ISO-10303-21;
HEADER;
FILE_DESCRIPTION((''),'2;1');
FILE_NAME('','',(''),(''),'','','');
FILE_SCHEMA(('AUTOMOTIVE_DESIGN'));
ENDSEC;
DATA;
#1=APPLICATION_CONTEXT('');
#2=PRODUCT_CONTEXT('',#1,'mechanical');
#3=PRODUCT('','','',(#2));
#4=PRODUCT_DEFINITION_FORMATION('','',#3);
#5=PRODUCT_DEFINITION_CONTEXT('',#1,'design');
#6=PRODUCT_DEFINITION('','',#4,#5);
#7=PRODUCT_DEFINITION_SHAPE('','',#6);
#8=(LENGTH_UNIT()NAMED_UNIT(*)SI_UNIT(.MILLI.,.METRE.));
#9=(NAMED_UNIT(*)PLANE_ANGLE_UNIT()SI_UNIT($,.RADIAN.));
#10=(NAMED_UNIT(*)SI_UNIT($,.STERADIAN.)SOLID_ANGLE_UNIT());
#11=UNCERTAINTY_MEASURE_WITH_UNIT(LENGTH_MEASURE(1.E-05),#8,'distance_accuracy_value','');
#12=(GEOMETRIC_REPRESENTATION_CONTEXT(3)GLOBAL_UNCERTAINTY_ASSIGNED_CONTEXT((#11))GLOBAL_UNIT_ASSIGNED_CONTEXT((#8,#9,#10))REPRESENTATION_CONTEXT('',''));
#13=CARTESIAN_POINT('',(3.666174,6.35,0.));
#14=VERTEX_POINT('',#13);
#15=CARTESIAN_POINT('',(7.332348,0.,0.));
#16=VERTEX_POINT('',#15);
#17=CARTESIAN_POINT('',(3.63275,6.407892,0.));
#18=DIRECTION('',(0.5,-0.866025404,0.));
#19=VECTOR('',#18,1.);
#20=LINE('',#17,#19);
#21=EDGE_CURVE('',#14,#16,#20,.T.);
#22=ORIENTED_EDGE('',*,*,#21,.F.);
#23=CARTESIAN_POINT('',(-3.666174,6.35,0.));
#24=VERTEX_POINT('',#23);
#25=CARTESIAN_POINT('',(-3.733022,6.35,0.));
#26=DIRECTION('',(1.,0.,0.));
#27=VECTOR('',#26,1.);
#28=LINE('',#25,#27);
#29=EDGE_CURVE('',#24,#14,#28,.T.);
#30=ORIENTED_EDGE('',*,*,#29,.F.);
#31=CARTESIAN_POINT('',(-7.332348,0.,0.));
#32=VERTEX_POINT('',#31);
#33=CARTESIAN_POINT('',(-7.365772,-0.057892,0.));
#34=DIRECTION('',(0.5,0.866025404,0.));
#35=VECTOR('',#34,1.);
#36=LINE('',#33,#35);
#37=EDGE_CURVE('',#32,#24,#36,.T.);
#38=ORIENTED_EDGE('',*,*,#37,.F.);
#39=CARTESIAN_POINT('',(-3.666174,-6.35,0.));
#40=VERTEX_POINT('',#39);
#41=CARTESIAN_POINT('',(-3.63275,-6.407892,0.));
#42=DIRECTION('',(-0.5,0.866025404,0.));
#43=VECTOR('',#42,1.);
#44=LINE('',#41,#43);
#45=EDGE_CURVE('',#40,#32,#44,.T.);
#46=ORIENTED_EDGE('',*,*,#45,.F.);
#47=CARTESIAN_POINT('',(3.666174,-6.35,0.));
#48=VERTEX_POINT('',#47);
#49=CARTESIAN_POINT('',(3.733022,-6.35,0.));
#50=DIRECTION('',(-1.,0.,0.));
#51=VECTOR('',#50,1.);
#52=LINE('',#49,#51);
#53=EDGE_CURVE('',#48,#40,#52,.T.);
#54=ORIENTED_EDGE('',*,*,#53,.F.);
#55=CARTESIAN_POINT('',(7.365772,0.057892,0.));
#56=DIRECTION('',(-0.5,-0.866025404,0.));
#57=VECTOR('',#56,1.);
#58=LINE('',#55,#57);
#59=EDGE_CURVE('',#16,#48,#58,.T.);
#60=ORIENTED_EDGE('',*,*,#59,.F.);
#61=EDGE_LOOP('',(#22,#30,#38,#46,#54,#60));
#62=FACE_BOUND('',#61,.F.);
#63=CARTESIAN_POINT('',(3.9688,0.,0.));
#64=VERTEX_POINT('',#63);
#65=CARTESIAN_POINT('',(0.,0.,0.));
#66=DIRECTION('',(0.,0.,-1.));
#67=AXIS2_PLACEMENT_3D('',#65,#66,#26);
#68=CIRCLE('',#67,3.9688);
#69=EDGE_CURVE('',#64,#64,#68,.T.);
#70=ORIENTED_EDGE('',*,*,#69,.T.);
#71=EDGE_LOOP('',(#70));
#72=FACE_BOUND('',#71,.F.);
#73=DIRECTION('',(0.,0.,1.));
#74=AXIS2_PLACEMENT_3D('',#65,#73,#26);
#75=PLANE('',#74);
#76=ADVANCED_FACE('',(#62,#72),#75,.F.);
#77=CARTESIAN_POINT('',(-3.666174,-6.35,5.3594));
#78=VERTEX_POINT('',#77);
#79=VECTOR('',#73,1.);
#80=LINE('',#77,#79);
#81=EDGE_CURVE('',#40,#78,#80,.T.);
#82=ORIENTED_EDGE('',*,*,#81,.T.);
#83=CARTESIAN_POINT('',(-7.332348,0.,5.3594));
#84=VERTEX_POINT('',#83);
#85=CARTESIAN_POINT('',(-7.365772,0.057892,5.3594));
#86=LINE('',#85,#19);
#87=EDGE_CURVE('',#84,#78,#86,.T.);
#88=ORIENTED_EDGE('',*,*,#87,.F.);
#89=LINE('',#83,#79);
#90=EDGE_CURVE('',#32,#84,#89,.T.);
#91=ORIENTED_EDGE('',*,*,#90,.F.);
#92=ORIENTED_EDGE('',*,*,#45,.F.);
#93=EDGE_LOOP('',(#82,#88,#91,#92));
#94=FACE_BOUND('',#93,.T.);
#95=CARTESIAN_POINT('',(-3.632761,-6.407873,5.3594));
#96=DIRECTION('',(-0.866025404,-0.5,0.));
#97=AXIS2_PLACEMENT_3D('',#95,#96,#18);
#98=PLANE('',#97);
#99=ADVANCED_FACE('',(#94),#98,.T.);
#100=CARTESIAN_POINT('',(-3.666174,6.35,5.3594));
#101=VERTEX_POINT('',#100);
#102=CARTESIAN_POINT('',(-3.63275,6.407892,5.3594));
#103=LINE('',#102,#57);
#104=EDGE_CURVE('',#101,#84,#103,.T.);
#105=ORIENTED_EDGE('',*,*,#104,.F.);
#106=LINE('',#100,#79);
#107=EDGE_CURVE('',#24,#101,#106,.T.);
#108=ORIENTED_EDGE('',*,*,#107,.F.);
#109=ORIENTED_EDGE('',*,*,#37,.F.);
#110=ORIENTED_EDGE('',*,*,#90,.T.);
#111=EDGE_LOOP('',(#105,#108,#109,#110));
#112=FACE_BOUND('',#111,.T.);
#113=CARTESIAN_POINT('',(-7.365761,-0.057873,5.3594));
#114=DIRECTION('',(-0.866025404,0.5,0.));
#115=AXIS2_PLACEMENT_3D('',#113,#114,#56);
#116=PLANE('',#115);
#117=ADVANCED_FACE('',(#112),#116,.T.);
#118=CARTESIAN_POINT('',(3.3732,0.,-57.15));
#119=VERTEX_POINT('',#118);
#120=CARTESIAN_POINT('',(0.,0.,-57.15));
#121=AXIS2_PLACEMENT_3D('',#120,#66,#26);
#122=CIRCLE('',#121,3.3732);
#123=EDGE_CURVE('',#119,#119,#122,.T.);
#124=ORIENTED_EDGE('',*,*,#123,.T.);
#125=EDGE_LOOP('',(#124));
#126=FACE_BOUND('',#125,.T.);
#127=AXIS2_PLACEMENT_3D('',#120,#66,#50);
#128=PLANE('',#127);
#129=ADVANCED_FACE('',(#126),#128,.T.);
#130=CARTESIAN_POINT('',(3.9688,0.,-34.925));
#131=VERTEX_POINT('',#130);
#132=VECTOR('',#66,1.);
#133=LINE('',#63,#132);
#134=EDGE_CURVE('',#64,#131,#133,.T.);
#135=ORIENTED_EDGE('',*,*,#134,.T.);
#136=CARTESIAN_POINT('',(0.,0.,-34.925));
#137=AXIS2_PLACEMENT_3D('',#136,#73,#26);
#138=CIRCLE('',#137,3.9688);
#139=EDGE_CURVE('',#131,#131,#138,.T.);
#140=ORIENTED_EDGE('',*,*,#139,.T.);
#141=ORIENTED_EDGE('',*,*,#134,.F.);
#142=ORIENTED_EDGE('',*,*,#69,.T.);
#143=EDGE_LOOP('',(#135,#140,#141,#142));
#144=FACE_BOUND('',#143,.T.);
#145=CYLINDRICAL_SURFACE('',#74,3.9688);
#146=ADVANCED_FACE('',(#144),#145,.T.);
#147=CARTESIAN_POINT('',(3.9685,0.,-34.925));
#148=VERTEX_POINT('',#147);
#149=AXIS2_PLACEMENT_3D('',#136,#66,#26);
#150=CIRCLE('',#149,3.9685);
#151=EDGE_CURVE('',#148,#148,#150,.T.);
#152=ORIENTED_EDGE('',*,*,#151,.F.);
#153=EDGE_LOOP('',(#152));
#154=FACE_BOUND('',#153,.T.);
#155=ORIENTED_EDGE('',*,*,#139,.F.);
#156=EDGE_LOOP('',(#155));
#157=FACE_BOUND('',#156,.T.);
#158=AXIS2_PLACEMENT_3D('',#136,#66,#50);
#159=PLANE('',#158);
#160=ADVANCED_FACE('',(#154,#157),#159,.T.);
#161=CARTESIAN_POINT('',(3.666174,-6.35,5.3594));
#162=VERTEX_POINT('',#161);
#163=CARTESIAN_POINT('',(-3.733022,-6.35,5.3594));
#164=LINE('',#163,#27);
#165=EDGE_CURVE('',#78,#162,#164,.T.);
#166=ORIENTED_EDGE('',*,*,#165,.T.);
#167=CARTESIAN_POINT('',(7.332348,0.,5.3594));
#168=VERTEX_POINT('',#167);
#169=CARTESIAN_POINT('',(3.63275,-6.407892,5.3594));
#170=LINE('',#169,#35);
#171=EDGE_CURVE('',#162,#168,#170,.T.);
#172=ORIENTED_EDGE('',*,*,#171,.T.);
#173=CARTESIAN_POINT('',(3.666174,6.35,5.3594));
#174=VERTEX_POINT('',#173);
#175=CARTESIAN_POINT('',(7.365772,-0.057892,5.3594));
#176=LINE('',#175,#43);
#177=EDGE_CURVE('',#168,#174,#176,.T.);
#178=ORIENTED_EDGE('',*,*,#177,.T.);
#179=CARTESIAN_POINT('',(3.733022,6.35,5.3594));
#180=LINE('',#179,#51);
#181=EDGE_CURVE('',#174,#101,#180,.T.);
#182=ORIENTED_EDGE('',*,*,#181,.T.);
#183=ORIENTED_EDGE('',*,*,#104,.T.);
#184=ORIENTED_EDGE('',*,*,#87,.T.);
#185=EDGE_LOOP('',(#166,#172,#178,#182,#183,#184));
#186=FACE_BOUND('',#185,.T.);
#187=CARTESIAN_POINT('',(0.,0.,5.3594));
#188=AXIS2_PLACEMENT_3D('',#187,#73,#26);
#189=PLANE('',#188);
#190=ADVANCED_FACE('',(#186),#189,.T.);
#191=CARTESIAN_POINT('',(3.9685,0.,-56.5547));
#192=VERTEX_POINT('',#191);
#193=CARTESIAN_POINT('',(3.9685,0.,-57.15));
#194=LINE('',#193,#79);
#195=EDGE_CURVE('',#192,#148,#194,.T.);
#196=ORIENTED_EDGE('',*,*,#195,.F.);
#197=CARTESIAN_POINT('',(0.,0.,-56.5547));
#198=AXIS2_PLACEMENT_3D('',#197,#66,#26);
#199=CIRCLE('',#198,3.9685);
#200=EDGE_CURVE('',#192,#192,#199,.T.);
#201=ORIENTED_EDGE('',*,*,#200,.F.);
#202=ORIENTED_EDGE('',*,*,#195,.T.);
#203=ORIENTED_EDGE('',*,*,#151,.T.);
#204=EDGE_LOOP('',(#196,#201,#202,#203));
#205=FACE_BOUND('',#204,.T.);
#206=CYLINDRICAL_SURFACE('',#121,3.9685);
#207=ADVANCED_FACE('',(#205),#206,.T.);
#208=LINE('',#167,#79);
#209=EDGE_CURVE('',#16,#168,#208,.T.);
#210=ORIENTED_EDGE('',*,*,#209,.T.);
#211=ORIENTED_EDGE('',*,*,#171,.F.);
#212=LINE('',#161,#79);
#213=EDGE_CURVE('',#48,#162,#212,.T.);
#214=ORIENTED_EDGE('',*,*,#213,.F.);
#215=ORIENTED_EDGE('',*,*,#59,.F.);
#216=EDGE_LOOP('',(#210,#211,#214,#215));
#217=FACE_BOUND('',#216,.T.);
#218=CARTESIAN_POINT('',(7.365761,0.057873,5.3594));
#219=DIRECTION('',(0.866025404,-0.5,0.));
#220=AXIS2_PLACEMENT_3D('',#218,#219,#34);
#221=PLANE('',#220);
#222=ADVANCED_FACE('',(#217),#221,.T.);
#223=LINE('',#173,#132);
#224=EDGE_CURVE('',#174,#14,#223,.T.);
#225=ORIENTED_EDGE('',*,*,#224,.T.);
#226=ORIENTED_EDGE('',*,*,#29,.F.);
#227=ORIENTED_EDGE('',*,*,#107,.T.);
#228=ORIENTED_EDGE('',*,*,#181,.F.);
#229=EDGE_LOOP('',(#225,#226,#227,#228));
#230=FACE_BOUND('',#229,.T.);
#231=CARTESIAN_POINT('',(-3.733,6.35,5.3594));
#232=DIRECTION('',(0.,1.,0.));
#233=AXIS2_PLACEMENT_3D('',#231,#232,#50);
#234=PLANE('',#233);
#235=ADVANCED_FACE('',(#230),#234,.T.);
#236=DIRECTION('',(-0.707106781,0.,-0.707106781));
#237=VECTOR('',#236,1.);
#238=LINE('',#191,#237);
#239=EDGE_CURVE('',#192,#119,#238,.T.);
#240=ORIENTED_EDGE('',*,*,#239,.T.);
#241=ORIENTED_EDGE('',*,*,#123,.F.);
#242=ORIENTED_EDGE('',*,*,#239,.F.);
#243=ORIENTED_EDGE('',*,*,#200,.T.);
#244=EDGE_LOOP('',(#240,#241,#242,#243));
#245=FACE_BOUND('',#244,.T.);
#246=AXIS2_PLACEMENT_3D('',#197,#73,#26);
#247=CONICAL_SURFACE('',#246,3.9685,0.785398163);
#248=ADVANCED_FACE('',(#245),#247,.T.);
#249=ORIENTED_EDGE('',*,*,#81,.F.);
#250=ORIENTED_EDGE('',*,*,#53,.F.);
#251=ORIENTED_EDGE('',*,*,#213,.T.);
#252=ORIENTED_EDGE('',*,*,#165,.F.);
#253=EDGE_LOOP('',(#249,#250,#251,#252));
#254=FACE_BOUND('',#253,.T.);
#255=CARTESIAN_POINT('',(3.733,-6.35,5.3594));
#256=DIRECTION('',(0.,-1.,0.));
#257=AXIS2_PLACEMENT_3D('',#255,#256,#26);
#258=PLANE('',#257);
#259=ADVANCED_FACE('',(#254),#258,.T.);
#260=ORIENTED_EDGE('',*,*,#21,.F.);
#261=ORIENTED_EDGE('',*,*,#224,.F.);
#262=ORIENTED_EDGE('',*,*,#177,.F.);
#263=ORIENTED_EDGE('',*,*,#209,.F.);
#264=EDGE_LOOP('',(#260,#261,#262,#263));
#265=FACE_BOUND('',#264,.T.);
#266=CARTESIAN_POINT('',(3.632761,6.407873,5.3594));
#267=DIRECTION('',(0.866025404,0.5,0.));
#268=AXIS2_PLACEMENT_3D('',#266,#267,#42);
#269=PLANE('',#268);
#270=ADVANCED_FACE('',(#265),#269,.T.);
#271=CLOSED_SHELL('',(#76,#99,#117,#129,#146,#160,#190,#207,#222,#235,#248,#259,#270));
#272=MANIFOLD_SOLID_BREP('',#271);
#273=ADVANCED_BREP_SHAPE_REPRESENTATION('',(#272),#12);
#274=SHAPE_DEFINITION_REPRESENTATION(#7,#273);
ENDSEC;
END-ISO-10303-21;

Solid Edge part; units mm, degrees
sketch "Sketch1" plane through (0, 0, 0) normal (0, 0, 1) x (1, 0, 0)
  circle A0 centre (0, 0) radius 7.366
  dimension "D1" = 14.732
extrude "Protrusion1" add sketch "Sketch1" along normal blind 5.3594
sketch "Sketch2" plane through (0, 0, 0) normal (0, 0, -1) x (1, 0, 0)
  circle A0 centre (0, 0) radius 3.9688
extrude "Protrusion2" add sketch "Sketch2" along normal blind 57.15
sketch "Sketch3" plane through (0, 0, -57.15) normal (0, 0, -1) x (1, 0, 0)
  circle A0 centre (0, 0) radius 3.9685
extrude "Cutout1" cut sketch "Sketch3" against normal blind 22.225 flip side to cut
chamfer "Chamfer_1" distance 0.5953 angle 45 1 edges at (-3.9685, 0, -57.15)
sketch "Sketch4" plane through (0, 0, 5.3594) normal (0, 0, 1) x (1, 0, 0)
  line L0 (-3.733, 6.35) -> (3.733, 6.35)
  dimension "D1" = 12.7
extrude "Cutout2" cut sketch "Sketch4" against normal up to next material side at (0, 6.4, 5.3594)
pattern_circular "Pattern1" count 6 over 360 about axis through (0, 0, 5.3594) along (0, 0, 1) of "Cutout2"
properties part number "24102100"
